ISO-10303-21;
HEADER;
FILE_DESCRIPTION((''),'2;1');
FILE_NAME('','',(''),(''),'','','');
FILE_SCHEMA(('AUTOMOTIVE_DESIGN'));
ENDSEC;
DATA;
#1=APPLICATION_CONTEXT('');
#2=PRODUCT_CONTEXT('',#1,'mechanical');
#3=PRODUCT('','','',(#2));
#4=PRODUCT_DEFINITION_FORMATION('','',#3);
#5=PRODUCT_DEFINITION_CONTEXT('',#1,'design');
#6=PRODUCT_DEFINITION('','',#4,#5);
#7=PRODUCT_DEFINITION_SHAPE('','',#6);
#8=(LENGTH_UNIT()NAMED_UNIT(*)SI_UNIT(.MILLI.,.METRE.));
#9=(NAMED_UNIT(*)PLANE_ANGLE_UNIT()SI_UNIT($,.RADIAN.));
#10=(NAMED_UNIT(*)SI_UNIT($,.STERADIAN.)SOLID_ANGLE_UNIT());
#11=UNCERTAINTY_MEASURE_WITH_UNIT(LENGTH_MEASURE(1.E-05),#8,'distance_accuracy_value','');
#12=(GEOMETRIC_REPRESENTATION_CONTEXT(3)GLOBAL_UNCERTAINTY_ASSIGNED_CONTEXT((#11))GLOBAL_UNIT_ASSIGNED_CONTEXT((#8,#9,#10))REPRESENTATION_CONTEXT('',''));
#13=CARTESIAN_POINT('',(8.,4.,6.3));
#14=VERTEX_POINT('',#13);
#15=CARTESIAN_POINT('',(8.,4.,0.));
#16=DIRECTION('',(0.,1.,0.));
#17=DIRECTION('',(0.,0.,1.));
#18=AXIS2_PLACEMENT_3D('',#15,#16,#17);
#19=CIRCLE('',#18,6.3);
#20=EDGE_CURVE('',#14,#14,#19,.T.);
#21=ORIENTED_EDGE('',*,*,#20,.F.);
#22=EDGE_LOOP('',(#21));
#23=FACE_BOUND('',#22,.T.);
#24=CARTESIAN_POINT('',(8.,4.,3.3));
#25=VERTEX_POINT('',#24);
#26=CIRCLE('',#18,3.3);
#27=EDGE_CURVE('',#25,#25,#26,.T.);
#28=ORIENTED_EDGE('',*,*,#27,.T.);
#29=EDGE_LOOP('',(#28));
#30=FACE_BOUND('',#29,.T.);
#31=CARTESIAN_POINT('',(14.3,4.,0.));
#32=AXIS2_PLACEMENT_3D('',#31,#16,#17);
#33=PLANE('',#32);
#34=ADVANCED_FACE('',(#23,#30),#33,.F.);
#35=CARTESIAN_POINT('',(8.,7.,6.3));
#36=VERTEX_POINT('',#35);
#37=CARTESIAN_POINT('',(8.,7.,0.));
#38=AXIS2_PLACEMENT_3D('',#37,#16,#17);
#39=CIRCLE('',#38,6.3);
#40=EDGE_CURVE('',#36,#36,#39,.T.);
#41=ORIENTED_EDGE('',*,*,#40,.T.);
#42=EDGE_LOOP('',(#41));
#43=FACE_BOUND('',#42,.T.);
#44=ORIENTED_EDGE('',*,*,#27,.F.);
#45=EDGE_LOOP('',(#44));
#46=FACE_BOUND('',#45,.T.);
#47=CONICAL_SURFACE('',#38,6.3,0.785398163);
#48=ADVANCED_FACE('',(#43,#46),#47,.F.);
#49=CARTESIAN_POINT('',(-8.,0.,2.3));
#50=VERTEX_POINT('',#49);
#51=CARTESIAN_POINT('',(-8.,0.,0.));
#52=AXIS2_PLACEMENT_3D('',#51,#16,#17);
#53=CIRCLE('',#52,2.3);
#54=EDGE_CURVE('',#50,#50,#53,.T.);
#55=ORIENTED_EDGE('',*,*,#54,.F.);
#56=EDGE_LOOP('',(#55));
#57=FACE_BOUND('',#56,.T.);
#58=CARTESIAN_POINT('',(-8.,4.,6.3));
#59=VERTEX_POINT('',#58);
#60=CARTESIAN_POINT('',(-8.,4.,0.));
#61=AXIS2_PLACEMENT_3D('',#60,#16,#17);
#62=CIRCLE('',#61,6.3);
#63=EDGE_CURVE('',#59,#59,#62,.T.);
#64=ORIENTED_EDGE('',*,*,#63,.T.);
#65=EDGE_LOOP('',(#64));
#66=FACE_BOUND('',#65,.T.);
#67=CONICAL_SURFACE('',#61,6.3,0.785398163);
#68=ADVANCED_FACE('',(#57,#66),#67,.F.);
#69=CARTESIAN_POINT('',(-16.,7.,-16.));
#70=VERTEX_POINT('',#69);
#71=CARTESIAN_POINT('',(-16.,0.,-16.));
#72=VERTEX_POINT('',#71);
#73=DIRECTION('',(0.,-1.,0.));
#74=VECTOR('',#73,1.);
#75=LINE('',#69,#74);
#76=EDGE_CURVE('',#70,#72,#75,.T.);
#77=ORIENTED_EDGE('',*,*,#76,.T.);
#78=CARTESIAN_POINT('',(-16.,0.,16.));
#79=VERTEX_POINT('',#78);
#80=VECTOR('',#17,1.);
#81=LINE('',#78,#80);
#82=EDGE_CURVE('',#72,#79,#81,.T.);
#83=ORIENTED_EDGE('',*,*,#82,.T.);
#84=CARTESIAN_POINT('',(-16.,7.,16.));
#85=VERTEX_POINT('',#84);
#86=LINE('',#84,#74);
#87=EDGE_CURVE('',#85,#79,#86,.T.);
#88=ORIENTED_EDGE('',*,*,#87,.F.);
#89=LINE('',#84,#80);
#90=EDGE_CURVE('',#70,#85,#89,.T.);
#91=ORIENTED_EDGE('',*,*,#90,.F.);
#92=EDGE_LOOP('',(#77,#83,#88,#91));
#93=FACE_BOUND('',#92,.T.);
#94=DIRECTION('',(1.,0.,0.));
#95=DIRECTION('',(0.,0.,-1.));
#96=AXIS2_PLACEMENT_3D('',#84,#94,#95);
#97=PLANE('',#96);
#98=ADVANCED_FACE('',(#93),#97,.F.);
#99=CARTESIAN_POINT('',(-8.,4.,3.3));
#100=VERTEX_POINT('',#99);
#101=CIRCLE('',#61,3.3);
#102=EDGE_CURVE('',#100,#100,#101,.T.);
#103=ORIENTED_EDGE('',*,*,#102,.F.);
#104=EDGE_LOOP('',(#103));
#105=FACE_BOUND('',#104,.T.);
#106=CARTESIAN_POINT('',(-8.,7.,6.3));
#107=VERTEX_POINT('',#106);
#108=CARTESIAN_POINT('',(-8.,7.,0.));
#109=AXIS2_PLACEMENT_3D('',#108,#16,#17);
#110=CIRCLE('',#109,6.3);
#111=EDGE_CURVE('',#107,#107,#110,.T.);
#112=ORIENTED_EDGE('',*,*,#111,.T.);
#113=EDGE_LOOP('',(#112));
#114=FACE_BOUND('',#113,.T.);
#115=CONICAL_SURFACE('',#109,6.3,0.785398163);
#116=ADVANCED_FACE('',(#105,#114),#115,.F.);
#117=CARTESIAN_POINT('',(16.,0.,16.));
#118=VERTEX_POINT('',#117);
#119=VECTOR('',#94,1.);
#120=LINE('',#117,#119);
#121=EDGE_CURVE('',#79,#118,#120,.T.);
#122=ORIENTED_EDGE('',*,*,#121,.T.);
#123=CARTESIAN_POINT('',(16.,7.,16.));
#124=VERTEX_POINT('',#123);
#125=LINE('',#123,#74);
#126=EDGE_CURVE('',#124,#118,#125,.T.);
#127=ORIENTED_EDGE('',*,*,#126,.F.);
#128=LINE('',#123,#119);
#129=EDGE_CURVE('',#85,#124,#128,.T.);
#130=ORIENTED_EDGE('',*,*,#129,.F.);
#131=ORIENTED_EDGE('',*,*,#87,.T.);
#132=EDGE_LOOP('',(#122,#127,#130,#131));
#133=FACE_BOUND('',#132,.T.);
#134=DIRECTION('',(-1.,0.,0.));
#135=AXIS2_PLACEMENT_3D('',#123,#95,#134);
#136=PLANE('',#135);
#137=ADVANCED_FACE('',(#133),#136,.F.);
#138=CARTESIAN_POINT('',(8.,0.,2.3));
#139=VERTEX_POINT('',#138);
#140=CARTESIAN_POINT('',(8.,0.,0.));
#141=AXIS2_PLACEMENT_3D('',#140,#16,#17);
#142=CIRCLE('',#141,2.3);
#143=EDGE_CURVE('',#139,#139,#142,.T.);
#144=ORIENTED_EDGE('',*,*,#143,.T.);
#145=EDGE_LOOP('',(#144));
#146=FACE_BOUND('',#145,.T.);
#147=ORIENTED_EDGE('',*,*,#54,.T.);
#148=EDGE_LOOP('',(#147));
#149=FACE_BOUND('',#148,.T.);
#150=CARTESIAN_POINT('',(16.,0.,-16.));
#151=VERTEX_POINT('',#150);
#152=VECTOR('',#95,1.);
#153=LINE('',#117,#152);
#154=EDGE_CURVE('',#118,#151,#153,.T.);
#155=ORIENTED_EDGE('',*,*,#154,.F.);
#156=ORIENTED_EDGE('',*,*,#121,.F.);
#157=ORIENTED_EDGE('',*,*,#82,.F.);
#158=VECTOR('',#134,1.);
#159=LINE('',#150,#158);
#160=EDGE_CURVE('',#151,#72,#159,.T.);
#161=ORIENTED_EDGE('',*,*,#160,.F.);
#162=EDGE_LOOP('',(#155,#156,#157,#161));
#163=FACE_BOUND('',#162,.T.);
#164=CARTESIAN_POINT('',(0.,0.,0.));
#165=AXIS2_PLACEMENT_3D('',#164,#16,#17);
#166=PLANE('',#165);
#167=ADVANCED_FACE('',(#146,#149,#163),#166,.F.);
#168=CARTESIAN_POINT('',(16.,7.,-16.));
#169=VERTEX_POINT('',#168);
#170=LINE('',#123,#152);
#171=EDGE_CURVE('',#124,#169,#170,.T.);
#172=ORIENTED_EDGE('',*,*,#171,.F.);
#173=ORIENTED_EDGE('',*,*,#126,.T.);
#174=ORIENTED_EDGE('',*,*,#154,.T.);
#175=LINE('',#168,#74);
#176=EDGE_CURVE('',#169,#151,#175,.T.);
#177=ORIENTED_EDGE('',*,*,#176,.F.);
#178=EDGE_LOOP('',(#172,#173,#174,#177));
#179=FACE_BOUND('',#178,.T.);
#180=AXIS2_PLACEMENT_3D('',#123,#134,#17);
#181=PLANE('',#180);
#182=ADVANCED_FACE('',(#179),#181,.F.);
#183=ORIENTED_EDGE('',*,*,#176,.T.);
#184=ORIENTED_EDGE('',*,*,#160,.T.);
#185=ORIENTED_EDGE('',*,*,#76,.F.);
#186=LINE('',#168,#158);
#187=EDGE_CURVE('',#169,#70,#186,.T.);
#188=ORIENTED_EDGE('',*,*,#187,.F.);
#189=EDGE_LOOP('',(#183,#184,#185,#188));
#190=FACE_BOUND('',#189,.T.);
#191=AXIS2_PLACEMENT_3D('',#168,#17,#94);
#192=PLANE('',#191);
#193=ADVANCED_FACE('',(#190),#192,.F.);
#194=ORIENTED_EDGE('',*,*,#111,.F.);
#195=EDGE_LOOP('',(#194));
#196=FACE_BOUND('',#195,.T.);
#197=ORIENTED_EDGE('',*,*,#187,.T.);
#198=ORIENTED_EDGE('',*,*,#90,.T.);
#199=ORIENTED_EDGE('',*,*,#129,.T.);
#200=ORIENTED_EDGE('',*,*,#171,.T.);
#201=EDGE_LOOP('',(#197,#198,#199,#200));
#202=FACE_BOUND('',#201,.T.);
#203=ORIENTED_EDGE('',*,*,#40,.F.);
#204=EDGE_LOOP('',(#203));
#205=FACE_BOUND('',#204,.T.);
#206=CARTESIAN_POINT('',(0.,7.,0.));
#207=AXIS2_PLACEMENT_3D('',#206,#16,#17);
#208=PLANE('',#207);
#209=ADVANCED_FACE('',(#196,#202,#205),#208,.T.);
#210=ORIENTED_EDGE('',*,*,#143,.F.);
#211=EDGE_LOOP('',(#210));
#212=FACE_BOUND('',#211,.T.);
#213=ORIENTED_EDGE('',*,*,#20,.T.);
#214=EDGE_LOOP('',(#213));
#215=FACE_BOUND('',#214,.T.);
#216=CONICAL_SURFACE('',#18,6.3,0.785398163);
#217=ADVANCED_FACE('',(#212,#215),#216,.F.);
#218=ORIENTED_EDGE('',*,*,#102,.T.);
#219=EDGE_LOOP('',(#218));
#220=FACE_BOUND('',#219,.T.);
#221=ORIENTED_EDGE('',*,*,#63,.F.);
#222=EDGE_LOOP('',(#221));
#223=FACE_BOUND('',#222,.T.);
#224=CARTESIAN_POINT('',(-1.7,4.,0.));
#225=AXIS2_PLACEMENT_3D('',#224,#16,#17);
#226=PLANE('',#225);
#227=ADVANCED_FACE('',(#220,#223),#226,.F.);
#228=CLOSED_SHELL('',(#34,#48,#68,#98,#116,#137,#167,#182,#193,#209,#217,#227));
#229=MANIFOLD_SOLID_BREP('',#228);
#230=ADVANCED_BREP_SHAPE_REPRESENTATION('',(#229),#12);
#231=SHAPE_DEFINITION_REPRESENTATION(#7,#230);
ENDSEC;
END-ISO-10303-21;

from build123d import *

# Parameters (mm, degrees)
SKETCH1_W           = 32
SKETCH1_H           = 32
BOSS_EXTRUDE1_DEPTH = 7


# Read off the part's stored shape, not the designer's step: AdvancedHole1
with BuildPart() as part:
    # Sketch1 → Boss-Extrude1 (new body)
    with BuildSketch(Plane(origin=(0, 0, 0), x_dir=(1, 0, 0), z_dir=(0, 1, 0))):
        Rectangle(SKETCH1_W, SKETCH1_H)
    extrude(amount=BOSS_EXTRUDE1_DEPTH)

    # AdvancedHole1 outline → AdvancedHole1 (revolve, cut)
    with BuildSketch(Plane(origin=(8, 0, 0), x_dir=(1, 0, 0), z_dir=(0, 0, 1))):
        Polygon((6.3, 4), (3.3, 4), (6.3, 7), (0, 7), (0, 0), (2.3, 0), align=None)
    revolve(axis=Axis((8, 0, 0), (0, 1, 0)), mode=Mode.SUBTRACT)

    # AdvancedHole1 2 outline → AdvancedHole1 2 (revolve, cut)
    with BuildSketch(Plane(origin=(-8, 0, 0), x_dir=(1, 0, 0), z_dir=(0, 0, 1))):
        Polygon((6.3, 4), (3.3, 4), (6.3, 7), (0, 7), (0, 0), (2.3, 0), align=None)
    revolve(axis=Axis((-8, 0, 0), (0, 1, 0)), mode=Mode.SUBTRACT)


solid = part.part
